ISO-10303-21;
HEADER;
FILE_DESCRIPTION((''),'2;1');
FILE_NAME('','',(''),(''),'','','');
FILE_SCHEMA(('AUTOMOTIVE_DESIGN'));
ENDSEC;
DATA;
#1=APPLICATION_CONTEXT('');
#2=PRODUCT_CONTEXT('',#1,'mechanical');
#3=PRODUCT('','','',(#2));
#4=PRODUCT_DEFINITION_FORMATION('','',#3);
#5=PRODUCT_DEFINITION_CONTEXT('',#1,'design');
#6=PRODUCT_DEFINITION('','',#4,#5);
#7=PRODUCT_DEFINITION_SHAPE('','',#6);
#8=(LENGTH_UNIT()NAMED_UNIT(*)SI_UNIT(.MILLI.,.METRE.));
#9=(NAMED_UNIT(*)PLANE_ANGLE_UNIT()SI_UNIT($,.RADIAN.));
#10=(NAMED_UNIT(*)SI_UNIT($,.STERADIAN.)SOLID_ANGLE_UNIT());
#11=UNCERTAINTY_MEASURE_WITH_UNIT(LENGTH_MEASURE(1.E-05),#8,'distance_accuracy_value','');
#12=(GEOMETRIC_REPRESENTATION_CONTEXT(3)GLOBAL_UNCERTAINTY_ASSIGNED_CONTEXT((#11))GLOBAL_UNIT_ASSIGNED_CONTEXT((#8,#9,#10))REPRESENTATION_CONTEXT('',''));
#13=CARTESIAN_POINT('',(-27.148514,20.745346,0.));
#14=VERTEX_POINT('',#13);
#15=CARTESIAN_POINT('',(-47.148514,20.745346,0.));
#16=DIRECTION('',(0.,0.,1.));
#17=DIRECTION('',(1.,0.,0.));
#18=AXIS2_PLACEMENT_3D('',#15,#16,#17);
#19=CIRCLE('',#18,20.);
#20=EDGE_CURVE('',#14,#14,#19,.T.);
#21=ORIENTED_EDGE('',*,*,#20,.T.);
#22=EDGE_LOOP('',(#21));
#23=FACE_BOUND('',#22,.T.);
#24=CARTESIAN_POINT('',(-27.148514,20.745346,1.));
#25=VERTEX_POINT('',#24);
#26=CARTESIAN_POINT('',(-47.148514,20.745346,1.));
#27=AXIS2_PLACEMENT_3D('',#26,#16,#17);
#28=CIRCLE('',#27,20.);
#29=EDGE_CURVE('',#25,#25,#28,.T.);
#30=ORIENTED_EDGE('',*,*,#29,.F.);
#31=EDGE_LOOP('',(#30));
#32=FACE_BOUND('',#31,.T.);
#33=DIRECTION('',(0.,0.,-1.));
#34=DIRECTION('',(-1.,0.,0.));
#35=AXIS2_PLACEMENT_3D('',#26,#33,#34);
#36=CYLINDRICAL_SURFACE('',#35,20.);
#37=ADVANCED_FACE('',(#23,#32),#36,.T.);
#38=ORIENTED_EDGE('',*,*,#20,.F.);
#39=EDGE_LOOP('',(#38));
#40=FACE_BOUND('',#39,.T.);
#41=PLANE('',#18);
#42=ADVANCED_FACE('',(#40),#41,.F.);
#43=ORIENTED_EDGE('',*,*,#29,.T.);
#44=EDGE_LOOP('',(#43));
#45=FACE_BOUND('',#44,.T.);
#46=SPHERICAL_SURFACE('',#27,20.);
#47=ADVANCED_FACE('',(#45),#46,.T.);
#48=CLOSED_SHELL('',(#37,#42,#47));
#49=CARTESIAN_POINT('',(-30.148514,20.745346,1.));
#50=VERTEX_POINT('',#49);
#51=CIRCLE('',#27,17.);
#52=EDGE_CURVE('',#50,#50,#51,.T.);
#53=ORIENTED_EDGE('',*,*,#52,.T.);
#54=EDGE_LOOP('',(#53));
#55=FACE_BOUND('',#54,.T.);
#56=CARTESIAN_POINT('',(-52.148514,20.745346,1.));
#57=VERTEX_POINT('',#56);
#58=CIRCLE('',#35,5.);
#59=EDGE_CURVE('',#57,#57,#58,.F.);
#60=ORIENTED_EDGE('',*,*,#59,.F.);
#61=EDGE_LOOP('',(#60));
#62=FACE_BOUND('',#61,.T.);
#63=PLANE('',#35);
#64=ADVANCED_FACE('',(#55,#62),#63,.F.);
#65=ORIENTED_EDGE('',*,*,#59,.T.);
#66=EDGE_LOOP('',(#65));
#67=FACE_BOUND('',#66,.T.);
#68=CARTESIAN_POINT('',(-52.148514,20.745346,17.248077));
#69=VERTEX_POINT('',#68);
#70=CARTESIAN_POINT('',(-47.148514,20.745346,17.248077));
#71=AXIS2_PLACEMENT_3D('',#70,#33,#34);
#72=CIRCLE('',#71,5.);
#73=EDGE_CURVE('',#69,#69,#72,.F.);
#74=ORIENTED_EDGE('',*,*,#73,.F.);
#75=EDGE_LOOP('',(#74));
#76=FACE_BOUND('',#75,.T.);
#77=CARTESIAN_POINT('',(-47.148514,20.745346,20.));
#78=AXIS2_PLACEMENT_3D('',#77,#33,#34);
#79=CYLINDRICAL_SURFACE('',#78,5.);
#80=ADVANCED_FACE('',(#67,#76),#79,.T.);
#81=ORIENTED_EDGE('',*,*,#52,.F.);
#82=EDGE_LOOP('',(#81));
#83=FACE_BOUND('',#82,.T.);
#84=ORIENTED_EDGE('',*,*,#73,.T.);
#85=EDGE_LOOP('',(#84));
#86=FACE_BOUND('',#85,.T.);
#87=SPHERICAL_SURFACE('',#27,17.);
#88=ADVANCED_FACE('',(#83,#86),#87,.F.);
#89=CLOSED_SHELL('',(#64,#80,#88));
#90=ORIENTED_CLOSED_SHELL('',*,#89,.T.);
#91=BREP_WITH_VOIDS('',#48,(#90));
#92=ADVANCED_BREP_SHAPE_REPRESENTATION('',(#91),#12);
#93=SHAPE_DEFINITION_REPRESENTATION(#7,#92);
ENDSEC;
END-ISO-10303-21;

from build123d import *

# Parameters (mm, degrees)
SKETCH1_R           = 20
BOSS_EXTRUDE1_DEPTH = 1
DOME1_FACE_RADIUS   = 20
DOME1_HEIGHT        = 20
SKETCH2_R           = 5
BOSS_EXTRUDE2_DEPTH = 20
SKETCH3_R           = 18.75
BOSS_EXTRUDE3_DEPTH = 1


# Read off the part's stored shape, not the designer's step: Shell1
with BuildPart() as part:
    # Sketch1 → Boss-Extrude1 (new body)
    with BuildSketch(Plane.XY):
        with Locations((-47.148513575, 20.745345973)):
            Circle(SKETCH1_R)
    extrude(amount=BOSS_EXTRUDE1_DEPTH)

    # Dome1: a dome of height H over a round flat face of radius A is a cap of a sphere of radius (A * A + H * H) / (2 * H)
    dome1_r = (DOME1_FACE_RADIUS * DOME1_FACE_RADIUS + DOME1_HEIGHT * DOME1_HEIGHT) / (2 * DOME1_HEIGHT)
    dome1_base = Plane((-47.148513575, 20.745345973, 1), z_dir=(0, 0, 1))
    with Locations(dome1_base.offset(DOME1_HEIGHT - dome1_r)):
        dome1_ball = Sphere(dome1_r, mode=Mode.PRIVATE)
    add(split(dome1_ball, bisect_by=dome1_base, keep=Keep.TOP, mode=Mode.PRIVATE))

    # Shell1 outline → Shell1 (revolve, cut)
    with BuildSketch(Plane(origin=(-47.148513575, 20.745345973, 0), x_dir=(1, 0, 0), z_dir=(0, -1, 0))):
        with BuildLine():
            Line((17, 0), (17, 0.999999983))
            ThreePointArc((17, 0.999999983), (12.020815286, 13.020815274), (0, 18))
            Line((0, 18), (0, 0))
            Line((0, 0), (17, 0))
        make_face()
    revolve(axis=Axis((-47.148513575, 20.745345973, 0), (0, 0, 1)), mode=Mode.SUBTRACT)

    # Sketch2 → Boss-Extrude2 (add)
    with BuildSketch(Plane(origin=(0, 0, 0), x_dir=(-1, 0, 0), z_dir=(0, 0, -1))):
        with Locations((47.148513575, 20.745345973)):
            Circle(SKETCH2_R)
    extrude(amount=-BOSS_EXTRUDE2_DEPTH)

    # Sketch3 → Boss-Extrude3 (add)
    with BuildSketch(Plane(origin=(0, 0, 0), x_dir=(-1, 0, 0), z_dir=(0, 0, -1))):
        with Locations((47.148513575, 20.745345973)):
            Circle(SKETCH3_R)
    extrude(amount=-BOSS_EXTRUDE3_DEPTH)


solid = part.part
